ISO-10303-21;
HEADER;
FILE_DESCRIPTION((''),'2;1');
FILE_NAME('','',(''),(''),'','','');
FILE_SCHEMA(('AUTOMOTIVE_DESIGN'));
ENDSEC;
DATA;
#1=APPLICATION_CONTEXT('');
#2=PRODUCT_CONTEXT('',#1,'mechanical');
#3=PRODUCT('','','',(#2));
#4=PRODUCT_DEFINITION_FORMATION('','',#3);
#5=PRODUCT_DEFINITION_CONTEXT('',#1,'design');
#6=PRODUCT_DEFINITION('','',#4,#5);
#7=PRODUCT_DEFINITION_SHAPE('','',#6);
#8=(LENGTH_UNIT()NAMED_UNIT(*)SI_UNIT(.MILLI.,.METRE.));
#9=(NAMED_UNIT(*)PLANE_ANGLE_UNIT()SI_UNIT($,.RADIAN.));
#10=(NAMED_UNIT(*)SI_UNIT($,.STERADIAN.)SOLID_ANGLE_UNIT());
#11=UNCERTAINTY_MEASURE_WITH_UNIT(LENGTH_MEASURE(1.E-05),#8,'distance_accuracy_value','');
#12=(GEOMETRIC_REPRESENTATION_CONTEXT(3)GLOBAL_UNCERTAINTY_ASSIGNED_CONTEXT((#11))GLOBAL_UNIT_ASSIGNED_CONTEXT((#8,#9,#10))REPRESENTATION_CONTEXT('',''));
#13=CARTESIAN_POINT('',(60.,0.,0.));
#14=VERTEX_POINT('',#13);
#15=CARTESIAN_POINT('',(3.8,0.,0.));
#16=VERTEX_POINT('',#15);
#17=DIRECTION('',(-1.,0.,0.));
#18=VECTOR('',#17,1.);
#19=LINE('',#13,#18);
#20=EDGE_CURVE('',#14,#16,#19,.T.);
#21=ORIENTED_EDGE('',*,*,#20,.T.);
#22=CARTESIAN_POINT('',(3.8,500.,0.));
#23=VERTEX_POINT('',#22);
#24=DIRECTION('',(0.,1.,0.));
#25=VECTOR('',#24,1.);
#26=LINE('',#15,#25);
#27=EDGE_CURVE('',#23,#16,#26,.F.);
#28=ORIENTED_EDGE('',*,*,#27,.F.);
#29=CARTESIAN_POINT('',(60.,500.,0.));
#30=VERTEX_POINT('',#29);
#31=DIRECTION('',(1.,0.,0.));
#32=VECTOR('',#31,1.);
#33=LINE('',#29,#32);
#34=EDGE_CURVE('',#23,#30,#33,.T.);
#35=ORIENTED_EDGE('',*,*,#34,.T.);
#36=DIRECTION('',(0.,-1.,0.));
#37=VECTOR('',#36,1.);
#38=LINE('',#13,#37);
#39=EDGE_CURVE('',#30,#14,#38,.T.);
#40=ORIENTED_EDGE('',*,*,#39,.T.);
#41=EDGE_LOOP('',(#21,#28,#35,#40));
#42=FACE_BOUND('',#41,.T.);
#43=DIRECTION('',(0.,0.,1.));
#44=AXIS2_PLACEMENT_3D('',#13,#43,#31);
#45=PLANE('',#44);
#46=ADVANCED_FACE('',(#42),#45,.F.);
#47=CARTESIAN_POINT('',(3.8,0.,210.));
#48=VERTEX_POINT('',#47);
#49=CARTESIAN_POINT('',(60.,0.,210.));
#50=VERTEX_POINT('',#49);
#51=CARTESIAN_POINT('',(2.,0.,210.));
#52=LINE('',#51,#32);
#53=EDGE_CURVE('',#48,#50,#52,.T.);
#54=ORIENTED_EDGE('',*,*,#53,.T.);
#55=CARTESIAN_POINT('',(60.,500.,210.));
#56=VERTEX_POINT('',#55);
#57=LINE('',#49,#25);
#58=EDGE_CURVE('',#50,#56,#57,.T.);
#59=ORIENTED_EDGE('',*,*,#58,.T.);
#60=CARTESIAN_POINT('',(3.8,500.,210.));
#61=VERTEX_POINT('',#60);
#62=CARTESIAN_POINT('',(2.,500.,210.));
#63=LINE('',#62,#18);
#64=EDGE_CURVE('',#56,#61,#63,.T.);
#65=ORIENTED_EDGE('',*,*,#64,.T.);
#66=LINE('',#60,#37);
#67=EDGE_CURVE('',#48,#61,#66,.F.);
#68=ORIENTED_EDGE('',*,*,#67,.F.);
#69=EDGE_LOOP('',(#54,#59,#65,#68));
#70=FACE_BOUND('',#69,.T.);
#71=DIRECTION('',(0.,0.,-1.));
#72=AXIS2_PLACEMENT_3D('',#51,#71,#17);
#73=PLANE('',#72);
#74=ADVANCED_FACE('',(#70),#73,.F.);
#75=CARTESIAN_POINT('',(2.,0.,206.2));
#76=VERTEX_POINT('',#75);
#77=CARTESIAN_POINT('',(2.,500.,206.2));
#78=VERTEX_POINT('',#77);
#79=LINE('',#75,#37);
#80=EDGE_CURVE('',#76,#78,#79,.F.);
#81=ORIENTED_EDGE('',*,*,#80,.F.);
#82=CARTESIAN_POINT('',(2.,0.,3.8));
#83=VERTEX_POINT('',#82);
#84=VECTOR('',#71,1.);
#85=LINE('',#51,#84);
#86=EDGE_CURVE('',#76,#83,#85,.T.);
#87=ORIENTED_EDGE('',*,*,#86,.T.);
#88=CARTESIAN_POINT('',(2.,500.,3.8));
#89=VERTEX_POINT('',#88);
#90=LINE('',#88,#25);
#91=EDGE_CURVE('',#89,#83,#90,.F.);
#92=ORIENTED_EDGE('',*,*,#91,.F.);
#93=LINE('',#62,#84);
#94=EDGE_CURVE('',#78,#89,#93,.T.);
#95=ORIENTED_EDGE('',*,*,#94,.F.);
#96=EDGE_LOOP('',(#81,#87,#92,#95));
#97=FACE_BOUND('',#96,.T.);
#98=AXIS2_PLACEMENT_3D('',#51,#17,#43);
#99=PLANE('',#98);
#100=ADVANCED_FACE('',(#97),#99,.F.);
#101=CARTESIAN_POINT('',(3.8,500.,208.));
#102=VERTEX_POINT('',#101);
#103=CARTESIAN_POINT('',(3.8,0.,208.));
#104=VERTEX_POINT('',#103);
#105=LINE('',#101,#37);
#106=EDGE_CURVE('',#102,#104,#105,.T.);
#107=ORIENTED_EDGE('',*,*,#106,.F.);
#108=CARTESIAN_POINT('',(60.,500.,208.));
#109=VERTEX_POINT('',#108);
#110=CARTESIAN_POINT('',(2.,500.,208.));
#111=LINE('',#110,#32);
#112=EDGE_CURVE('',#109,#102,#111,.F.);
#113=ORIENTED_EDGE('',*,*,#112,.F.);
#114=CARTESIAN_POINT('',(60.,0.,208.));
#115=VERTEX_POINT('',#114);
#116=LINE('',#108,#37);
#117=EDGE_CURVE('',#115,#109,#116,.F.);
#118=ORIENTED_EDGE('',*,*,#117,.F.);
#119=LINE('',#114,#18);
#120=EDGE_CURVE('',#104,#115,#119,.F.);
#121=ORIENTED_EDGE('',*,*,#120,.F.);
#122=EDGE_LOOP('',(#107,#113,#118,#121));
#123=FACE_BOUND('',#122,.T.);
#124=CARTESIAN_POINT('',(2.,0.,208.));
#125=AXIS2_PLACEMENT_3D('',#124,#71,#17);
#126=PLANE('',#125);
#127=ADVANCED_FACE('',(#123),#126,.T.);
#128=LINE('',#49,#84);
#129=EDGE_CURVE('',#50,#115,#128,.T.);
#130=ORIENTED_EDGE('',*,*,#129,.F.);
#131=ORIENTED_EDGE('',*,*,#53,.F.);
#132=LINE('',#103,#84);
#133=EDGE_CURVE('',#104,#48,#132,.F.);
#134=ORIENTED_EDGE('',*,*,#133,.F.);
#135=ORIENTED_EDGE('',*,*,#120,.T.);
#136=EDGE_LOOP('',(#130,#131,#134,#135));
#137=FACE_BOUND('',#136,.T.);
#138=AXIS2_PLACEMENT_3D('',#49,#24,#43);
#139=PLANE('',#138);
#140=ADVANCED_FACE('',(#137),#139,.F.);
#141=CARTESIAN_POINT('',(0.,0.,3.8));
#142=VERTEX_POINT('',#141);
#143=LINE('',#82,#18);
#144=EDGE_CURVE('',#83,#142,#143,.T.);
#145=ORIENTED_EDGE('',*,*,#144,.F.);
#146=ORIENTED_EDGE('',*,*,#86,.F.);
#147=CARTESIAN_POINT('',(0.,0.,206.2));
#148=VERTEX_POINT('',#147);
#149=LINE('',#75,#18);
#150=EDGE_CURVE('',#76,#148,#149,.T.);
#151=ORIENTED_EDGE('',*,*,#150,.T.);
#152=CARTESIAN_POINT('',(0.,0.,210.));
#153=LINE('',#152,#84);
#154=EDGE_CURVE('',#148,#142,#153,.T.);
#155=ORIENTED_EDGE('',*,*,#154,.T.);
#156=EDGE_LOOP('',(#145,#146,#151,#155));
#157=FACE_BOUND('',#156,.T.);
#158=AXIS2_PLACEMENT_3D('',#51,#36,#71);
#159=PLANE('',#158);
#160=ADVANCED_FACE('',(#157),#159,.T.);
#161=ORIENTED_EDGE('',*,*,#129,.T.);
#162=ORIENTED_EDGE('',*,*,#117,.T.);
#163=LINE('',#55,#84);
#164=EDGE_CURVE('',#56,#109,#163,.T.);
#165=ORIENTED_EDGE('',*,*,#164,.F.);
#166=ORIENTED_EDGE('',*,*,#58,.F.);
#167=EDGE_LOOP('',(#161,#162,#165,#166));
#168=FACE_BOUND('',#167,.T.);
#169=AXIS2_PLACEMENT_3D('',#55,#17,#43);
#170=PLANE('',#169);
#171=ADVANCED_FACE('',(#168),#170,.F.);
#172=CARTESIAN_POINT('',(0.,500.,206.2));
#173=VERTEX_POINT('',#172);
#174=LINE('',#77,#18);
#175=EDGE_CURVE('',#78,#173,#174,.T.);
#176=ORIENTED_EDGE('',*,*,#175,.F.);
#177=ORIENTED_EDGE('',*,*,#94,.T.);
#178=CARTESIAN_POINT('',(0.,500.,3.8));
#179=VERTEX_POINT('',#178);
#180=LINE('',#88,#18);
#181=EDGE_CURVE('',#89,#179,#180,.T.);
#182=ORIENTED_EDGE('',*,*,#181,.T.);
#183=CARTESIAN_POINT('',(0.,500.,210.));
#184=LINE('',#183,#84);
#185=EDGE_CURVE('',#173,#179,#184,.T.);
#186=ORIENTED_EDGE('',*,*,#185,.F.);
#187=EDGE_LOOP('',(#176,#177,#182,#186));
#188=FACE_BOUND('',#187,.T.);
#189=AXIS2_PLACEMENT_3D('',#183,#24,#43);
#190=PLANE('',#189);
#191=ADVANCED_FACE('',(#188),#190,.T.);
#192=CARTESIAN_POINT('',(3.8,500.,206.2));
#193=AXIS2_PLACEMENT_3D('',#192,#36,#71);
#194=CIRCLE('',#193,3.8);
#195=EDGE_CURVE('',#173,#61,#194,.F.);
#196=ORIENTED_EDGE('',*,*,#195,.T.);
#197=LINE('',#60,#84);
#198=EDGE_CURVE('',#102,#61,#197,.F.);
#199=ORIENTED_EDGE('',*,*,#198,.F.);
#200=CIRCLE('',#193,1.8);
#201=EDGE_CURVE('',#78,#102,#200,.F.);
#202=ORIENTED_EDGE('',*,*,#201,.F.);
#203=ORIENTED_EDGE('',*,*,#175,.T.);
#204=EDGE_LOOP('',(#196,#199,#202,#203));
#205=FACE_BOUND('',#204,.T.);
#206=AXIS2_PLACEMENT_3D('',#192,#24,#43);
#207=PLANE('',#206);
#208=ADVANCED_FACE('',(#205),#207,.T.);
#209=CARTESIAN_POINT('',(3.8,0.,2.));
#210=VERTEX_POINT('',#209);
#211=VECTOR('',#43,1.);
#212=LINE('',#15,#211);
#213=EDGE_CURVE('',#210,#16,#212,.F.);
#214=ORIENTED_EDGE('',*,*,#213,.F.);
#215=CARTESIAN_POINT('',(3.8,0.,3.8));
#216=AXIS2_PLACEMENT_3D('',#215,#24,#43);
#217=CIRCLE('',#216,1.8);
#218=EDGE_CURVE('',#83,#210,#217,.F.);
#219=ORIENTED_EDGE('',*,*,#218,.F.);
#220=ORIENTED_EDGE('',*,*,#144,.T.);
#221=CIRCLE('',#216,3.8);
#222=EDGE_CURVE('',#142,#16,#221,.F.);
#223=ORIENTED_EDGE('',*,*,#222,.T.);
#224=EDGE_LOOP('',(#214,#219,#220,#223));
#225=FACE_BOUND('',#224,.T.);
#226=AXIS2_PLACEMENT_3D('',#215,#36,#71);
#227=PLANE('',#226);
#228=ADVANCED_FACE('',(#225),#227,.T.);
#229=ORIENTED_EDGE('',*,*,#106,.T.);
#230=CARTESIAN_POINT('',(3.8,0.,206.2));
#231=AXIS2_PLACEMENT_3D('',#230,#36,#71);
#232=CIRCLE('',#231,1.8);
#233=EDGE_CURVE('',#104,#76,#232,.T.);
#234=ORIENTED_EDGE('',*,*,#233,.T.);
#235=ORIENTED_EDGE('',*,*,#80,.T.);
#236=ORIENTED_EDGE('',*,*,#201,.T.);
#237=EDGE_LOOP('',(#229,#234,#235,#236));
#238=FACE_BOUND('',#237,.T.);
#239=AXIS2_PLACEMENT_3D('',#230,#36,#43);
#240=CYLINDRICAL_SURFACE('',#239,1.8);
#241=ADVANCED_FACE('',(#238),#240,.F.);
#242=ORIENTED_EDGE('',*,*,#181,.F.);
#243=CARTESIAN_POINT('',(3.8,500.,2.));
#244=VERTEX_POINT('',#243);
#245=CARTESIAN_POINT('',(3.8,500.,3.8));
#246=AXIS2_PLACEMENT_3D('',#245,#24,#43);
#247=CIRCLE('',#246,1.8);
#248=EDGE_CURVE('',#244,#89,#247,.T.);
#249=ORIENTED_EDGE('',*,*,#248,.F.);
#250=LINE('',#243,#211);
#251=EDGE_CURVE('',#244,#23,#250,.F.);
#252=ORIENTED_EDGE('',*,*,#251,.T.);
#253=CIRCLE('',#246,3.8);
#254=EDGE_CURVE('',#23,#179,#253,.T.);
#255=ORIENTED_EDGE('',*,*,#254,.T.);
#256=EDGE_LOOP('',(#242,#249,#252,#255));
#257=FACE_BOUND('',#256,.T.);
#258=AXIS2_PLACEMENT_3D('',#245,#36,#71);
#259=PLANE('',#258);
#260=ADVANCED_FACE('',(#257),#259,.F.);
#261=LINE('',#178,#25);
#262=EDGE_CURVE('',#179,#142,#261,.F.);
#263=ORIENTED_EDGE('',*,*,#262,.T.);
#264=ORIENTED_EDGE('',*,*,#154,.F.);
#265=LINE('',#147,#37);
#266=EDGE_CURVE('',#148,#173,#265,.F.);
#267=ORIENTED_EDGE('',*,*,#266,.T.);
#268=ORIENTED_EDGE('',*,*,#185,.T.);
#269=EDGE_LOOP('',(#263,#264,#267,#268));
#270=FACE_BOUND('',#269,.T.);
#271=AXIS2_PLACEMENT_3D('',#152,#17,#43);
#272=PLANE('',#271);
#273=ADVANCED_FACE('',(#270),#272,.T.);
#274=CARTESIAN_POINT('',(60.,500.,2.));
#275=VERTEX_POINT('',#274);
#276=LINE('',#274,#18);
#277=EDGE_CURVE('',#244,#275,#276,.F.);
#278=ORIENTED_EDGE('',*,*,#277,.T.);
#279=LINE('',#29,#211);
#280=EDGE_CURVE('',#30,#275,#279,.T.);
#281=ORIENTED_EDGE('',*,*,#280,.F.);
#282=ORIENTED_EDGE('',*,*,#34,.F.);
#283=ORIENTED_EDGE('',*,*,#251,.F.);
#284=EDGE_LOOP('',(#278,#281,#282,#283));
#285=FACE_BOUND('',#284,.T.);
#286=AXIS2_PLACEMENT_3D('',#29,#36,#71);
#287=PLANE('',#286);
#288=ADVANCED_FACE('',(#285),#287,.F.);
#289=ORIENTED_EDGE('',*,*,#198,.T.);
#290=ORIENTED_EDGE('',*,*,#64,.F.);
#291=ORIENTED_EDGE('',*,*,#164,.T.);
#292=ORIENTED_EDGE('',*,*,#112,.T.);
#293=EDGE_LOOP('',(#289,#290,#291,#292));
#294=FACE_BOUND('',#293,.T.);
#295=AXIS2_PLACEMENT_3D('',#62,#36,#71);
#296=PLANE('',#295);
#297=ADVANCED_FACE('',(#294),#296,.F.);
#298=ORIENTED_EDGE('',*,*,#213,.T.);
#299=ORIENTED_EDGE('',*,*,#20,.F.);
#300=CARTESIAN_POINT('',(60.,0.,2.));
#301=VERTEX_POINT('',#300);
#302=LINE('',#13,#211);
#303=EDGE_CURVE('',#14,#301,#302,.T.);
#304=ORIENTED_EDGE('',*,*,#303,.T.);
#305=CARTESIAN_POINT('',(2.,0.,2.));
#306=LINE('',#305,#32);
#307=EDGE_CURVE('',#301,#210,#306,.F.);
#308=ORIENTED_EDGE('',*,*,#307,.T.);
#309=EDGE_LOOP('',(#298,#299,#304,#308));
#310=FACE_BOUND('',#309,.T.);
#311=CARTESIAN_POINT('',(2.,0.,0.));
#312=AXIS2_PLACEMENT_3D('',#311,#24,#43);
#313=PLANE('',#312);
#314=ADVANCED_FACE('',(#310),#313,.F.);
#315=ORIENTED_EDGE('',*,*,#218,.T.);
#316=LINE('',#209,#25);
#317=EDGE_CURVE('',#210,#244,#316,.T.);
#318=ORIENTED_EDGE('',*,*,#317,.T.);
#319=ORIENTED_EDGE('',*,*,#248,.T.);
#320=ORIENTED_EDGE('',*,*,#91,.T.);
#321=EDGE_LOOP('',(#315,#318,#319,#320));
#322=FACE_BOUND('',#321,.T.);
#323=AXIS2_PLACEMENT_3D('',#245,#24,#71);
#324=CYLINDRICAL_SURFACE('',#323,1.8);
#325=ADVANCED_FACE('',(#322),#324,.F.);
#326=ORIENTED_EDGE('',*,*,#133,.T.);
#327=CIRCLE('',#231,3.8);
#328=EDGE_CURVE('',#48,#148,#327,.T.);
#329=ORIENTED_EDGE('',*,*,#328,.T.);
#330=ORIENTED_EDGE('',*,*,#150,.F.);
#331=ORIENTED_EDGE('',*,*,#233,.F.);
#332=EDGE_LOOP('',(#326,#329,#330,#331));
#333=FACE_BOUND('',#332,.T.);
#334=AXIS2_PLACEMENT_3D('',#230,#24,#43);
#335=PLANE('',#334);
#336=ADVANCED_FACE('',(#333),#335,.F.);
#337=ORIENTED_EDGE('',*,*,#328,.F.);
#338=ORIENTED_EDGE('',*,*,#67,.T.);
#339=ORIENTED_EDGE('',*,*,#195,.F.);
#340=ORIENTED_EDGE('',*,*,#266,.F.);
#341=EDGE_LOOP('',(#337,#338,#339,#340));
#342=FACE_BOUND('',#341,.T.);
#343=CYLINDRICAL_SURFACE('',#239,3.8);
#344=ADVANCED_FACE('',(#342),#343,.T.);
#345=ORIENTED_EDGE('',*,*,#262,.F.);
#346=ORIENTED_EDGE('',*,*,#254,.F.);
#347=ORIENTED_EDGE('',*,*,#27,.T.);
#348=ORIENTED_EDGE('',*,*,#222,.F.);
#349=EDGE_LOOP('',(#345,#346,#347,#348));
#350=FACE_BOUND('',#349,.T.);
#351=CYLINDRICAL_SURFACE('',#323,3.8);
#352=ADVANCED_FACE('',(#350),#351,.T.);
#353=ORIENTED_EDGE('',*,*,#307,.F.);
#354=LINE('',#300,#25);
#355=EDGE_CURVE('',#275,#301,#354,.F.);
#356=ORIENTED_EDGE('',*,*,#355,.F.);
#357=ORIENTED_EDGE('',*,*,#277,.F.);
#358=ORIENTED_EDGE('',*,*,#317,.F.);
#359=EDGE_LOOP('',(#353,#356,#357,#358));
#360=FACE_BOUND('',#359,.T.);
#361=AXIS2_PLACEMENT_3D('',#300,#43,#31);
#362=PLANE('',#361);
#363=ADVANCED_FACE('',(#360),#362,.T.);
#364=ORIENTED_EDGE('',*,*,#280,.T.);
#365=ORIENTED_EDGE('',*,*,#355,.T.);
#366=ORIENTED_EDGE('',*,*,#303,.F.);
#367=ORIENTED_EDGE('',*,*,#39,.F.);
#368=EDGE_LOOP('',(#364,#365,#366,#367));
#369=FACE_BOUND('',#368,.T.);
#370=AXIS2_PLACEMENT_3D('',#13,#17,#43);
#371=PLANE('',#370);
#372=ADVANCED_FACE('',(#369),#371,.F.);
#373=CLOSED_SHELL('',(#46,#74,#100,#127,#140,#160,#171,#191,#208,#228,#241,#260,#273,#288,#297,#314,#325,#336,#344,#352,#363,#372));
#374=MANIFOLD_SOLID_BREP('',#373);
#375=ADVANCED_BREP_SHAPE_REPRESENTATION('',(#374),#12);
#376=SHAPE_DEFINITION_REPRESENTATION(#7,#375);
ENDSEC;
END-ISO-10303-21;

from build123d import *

# Parameters (mm, degrees)
SKETCH_1_W                         = 2
SKETCH_1_H                         = 500
SM_BASE_FLANGE_1_DEPTH             = 210
SM_EDGE_FLANGE_1_STRIP_W           = 11.6
SM_EDGE_FLANGE_1_STRIP_H           = 2
SM_EDGE_FLANGE_1_STRIP_CUT_DEPTH   = 500
SM_EDGE_FLANGE_1_STRIP_2_W         = 11.6
SM_EDGE_FLANGE_1_STRIP_2_H         = 2
SM_EDGE_FLANGE_1_STRIP_CUT_2_DEPTH = 500
SM_EDGE_FLANGE_1_DEPTH             = 500
SM_EDGE_FLANGE_1_BEND_DEPTH        = 500


# Sheet-metal steps are written as plain solids
with BuildPart() as part:
    # Sketch 1 → Базовая кромка1 (new body)
    with BuildSketch(Plane.XY):
        with Locations((1, 250)):
            Rectangle(SKETCH_1_W, SKETCH_1_H)
    extrude(amount=SM_BASE_FLANGE_1_DEPTH)

    # Ребро-кромка1 strip (across the edge) → Ребро-кромка1 strip cut (cut)
    with BuildSketch(Plane(origin=(2, 0, 0), x_dir=(0, 0, 1), z_dir=(0, 1, 0))):
        with Locations((-2, -1)):
            Rectangle(SM_EDGE_FLANGE_1_STRIP_W, SM_EDGE_FLANGE_1_STRIP_H)
    extrude(amount=SM_EDGE_FLANGE_1_STRIP_CUT_DEPTH, mode=Mode.SUBTRACT)

    # Ребро-кромка1 strip 2 (across the edge) → Ребро-кромка1 strip cut 2 (cut)
    with BuildSketch(Plane(origin=(2, 500, 210), x_dir=(0, 0, -1), z_dir=(0, -1, 0))):
        with Locations((-2, -1)):
            Rectangle(SM_EDGE_FLANGE_1_STRIP_2_W, SM_EDGE_FLANGE_1_STRIP_2_H)
    extrude(amount=SM_EDGE_FLANGE_1_STRIP_CUT_2_DEPTH, mode=Mode.SUBTRACT)

    # Ребро-кромка1 section (across the edge) → Ребро-кромка1 (add)
    with BuildSketch(Plane(origin=(2, 0, 0), x_dir=(0, 0, 1), z_dir=(0, 1, 0))):
        with BuildLine():
            Line((0, 1.8), (0, 58))
            Line((0, 58), (2, 58))
            Line((2, 58), (2, 1.8))
            ThreePointArc((2, 1.8), (2.527207794, 0.527207794), (3.8, 0))
            Line((3.8, 0), (3.8, -2))
            ThreePointArc((3.8, -2), (1.112994231, -0.887005769), (0, 1.8))
        make_face()
    extrude(amount=SM_EDGE_FLANGE_1_DEPTH)

    # Ребро-кромка1 section 2 (across the edge) → Ребро-кромка1 bend (add)
    with BuildSketch(Plane(origin=(2, 500, 210), x_dir=(0, 0, -1), z_dir=(0, -1, 0))):
        with BuildLine():
            Line((0, 1.8), (0, 58))
            Line((0, 58), (2, 58))
            Line((2, 58), (2, 1.8))
            ThreePointArc((2, 1.8), (2.527207794, 0.527207794), (3.8, 0))
            Line((3.8, 0), (3.8, -2))
            ThreePointArc((3.8, -2), (1.112994231, -0.887005769), (0, 1.8))
        make_face()
    extrude(amount=SM_EDGE_FLANGE_1_BEND_DEPTH)


solid = part.part
